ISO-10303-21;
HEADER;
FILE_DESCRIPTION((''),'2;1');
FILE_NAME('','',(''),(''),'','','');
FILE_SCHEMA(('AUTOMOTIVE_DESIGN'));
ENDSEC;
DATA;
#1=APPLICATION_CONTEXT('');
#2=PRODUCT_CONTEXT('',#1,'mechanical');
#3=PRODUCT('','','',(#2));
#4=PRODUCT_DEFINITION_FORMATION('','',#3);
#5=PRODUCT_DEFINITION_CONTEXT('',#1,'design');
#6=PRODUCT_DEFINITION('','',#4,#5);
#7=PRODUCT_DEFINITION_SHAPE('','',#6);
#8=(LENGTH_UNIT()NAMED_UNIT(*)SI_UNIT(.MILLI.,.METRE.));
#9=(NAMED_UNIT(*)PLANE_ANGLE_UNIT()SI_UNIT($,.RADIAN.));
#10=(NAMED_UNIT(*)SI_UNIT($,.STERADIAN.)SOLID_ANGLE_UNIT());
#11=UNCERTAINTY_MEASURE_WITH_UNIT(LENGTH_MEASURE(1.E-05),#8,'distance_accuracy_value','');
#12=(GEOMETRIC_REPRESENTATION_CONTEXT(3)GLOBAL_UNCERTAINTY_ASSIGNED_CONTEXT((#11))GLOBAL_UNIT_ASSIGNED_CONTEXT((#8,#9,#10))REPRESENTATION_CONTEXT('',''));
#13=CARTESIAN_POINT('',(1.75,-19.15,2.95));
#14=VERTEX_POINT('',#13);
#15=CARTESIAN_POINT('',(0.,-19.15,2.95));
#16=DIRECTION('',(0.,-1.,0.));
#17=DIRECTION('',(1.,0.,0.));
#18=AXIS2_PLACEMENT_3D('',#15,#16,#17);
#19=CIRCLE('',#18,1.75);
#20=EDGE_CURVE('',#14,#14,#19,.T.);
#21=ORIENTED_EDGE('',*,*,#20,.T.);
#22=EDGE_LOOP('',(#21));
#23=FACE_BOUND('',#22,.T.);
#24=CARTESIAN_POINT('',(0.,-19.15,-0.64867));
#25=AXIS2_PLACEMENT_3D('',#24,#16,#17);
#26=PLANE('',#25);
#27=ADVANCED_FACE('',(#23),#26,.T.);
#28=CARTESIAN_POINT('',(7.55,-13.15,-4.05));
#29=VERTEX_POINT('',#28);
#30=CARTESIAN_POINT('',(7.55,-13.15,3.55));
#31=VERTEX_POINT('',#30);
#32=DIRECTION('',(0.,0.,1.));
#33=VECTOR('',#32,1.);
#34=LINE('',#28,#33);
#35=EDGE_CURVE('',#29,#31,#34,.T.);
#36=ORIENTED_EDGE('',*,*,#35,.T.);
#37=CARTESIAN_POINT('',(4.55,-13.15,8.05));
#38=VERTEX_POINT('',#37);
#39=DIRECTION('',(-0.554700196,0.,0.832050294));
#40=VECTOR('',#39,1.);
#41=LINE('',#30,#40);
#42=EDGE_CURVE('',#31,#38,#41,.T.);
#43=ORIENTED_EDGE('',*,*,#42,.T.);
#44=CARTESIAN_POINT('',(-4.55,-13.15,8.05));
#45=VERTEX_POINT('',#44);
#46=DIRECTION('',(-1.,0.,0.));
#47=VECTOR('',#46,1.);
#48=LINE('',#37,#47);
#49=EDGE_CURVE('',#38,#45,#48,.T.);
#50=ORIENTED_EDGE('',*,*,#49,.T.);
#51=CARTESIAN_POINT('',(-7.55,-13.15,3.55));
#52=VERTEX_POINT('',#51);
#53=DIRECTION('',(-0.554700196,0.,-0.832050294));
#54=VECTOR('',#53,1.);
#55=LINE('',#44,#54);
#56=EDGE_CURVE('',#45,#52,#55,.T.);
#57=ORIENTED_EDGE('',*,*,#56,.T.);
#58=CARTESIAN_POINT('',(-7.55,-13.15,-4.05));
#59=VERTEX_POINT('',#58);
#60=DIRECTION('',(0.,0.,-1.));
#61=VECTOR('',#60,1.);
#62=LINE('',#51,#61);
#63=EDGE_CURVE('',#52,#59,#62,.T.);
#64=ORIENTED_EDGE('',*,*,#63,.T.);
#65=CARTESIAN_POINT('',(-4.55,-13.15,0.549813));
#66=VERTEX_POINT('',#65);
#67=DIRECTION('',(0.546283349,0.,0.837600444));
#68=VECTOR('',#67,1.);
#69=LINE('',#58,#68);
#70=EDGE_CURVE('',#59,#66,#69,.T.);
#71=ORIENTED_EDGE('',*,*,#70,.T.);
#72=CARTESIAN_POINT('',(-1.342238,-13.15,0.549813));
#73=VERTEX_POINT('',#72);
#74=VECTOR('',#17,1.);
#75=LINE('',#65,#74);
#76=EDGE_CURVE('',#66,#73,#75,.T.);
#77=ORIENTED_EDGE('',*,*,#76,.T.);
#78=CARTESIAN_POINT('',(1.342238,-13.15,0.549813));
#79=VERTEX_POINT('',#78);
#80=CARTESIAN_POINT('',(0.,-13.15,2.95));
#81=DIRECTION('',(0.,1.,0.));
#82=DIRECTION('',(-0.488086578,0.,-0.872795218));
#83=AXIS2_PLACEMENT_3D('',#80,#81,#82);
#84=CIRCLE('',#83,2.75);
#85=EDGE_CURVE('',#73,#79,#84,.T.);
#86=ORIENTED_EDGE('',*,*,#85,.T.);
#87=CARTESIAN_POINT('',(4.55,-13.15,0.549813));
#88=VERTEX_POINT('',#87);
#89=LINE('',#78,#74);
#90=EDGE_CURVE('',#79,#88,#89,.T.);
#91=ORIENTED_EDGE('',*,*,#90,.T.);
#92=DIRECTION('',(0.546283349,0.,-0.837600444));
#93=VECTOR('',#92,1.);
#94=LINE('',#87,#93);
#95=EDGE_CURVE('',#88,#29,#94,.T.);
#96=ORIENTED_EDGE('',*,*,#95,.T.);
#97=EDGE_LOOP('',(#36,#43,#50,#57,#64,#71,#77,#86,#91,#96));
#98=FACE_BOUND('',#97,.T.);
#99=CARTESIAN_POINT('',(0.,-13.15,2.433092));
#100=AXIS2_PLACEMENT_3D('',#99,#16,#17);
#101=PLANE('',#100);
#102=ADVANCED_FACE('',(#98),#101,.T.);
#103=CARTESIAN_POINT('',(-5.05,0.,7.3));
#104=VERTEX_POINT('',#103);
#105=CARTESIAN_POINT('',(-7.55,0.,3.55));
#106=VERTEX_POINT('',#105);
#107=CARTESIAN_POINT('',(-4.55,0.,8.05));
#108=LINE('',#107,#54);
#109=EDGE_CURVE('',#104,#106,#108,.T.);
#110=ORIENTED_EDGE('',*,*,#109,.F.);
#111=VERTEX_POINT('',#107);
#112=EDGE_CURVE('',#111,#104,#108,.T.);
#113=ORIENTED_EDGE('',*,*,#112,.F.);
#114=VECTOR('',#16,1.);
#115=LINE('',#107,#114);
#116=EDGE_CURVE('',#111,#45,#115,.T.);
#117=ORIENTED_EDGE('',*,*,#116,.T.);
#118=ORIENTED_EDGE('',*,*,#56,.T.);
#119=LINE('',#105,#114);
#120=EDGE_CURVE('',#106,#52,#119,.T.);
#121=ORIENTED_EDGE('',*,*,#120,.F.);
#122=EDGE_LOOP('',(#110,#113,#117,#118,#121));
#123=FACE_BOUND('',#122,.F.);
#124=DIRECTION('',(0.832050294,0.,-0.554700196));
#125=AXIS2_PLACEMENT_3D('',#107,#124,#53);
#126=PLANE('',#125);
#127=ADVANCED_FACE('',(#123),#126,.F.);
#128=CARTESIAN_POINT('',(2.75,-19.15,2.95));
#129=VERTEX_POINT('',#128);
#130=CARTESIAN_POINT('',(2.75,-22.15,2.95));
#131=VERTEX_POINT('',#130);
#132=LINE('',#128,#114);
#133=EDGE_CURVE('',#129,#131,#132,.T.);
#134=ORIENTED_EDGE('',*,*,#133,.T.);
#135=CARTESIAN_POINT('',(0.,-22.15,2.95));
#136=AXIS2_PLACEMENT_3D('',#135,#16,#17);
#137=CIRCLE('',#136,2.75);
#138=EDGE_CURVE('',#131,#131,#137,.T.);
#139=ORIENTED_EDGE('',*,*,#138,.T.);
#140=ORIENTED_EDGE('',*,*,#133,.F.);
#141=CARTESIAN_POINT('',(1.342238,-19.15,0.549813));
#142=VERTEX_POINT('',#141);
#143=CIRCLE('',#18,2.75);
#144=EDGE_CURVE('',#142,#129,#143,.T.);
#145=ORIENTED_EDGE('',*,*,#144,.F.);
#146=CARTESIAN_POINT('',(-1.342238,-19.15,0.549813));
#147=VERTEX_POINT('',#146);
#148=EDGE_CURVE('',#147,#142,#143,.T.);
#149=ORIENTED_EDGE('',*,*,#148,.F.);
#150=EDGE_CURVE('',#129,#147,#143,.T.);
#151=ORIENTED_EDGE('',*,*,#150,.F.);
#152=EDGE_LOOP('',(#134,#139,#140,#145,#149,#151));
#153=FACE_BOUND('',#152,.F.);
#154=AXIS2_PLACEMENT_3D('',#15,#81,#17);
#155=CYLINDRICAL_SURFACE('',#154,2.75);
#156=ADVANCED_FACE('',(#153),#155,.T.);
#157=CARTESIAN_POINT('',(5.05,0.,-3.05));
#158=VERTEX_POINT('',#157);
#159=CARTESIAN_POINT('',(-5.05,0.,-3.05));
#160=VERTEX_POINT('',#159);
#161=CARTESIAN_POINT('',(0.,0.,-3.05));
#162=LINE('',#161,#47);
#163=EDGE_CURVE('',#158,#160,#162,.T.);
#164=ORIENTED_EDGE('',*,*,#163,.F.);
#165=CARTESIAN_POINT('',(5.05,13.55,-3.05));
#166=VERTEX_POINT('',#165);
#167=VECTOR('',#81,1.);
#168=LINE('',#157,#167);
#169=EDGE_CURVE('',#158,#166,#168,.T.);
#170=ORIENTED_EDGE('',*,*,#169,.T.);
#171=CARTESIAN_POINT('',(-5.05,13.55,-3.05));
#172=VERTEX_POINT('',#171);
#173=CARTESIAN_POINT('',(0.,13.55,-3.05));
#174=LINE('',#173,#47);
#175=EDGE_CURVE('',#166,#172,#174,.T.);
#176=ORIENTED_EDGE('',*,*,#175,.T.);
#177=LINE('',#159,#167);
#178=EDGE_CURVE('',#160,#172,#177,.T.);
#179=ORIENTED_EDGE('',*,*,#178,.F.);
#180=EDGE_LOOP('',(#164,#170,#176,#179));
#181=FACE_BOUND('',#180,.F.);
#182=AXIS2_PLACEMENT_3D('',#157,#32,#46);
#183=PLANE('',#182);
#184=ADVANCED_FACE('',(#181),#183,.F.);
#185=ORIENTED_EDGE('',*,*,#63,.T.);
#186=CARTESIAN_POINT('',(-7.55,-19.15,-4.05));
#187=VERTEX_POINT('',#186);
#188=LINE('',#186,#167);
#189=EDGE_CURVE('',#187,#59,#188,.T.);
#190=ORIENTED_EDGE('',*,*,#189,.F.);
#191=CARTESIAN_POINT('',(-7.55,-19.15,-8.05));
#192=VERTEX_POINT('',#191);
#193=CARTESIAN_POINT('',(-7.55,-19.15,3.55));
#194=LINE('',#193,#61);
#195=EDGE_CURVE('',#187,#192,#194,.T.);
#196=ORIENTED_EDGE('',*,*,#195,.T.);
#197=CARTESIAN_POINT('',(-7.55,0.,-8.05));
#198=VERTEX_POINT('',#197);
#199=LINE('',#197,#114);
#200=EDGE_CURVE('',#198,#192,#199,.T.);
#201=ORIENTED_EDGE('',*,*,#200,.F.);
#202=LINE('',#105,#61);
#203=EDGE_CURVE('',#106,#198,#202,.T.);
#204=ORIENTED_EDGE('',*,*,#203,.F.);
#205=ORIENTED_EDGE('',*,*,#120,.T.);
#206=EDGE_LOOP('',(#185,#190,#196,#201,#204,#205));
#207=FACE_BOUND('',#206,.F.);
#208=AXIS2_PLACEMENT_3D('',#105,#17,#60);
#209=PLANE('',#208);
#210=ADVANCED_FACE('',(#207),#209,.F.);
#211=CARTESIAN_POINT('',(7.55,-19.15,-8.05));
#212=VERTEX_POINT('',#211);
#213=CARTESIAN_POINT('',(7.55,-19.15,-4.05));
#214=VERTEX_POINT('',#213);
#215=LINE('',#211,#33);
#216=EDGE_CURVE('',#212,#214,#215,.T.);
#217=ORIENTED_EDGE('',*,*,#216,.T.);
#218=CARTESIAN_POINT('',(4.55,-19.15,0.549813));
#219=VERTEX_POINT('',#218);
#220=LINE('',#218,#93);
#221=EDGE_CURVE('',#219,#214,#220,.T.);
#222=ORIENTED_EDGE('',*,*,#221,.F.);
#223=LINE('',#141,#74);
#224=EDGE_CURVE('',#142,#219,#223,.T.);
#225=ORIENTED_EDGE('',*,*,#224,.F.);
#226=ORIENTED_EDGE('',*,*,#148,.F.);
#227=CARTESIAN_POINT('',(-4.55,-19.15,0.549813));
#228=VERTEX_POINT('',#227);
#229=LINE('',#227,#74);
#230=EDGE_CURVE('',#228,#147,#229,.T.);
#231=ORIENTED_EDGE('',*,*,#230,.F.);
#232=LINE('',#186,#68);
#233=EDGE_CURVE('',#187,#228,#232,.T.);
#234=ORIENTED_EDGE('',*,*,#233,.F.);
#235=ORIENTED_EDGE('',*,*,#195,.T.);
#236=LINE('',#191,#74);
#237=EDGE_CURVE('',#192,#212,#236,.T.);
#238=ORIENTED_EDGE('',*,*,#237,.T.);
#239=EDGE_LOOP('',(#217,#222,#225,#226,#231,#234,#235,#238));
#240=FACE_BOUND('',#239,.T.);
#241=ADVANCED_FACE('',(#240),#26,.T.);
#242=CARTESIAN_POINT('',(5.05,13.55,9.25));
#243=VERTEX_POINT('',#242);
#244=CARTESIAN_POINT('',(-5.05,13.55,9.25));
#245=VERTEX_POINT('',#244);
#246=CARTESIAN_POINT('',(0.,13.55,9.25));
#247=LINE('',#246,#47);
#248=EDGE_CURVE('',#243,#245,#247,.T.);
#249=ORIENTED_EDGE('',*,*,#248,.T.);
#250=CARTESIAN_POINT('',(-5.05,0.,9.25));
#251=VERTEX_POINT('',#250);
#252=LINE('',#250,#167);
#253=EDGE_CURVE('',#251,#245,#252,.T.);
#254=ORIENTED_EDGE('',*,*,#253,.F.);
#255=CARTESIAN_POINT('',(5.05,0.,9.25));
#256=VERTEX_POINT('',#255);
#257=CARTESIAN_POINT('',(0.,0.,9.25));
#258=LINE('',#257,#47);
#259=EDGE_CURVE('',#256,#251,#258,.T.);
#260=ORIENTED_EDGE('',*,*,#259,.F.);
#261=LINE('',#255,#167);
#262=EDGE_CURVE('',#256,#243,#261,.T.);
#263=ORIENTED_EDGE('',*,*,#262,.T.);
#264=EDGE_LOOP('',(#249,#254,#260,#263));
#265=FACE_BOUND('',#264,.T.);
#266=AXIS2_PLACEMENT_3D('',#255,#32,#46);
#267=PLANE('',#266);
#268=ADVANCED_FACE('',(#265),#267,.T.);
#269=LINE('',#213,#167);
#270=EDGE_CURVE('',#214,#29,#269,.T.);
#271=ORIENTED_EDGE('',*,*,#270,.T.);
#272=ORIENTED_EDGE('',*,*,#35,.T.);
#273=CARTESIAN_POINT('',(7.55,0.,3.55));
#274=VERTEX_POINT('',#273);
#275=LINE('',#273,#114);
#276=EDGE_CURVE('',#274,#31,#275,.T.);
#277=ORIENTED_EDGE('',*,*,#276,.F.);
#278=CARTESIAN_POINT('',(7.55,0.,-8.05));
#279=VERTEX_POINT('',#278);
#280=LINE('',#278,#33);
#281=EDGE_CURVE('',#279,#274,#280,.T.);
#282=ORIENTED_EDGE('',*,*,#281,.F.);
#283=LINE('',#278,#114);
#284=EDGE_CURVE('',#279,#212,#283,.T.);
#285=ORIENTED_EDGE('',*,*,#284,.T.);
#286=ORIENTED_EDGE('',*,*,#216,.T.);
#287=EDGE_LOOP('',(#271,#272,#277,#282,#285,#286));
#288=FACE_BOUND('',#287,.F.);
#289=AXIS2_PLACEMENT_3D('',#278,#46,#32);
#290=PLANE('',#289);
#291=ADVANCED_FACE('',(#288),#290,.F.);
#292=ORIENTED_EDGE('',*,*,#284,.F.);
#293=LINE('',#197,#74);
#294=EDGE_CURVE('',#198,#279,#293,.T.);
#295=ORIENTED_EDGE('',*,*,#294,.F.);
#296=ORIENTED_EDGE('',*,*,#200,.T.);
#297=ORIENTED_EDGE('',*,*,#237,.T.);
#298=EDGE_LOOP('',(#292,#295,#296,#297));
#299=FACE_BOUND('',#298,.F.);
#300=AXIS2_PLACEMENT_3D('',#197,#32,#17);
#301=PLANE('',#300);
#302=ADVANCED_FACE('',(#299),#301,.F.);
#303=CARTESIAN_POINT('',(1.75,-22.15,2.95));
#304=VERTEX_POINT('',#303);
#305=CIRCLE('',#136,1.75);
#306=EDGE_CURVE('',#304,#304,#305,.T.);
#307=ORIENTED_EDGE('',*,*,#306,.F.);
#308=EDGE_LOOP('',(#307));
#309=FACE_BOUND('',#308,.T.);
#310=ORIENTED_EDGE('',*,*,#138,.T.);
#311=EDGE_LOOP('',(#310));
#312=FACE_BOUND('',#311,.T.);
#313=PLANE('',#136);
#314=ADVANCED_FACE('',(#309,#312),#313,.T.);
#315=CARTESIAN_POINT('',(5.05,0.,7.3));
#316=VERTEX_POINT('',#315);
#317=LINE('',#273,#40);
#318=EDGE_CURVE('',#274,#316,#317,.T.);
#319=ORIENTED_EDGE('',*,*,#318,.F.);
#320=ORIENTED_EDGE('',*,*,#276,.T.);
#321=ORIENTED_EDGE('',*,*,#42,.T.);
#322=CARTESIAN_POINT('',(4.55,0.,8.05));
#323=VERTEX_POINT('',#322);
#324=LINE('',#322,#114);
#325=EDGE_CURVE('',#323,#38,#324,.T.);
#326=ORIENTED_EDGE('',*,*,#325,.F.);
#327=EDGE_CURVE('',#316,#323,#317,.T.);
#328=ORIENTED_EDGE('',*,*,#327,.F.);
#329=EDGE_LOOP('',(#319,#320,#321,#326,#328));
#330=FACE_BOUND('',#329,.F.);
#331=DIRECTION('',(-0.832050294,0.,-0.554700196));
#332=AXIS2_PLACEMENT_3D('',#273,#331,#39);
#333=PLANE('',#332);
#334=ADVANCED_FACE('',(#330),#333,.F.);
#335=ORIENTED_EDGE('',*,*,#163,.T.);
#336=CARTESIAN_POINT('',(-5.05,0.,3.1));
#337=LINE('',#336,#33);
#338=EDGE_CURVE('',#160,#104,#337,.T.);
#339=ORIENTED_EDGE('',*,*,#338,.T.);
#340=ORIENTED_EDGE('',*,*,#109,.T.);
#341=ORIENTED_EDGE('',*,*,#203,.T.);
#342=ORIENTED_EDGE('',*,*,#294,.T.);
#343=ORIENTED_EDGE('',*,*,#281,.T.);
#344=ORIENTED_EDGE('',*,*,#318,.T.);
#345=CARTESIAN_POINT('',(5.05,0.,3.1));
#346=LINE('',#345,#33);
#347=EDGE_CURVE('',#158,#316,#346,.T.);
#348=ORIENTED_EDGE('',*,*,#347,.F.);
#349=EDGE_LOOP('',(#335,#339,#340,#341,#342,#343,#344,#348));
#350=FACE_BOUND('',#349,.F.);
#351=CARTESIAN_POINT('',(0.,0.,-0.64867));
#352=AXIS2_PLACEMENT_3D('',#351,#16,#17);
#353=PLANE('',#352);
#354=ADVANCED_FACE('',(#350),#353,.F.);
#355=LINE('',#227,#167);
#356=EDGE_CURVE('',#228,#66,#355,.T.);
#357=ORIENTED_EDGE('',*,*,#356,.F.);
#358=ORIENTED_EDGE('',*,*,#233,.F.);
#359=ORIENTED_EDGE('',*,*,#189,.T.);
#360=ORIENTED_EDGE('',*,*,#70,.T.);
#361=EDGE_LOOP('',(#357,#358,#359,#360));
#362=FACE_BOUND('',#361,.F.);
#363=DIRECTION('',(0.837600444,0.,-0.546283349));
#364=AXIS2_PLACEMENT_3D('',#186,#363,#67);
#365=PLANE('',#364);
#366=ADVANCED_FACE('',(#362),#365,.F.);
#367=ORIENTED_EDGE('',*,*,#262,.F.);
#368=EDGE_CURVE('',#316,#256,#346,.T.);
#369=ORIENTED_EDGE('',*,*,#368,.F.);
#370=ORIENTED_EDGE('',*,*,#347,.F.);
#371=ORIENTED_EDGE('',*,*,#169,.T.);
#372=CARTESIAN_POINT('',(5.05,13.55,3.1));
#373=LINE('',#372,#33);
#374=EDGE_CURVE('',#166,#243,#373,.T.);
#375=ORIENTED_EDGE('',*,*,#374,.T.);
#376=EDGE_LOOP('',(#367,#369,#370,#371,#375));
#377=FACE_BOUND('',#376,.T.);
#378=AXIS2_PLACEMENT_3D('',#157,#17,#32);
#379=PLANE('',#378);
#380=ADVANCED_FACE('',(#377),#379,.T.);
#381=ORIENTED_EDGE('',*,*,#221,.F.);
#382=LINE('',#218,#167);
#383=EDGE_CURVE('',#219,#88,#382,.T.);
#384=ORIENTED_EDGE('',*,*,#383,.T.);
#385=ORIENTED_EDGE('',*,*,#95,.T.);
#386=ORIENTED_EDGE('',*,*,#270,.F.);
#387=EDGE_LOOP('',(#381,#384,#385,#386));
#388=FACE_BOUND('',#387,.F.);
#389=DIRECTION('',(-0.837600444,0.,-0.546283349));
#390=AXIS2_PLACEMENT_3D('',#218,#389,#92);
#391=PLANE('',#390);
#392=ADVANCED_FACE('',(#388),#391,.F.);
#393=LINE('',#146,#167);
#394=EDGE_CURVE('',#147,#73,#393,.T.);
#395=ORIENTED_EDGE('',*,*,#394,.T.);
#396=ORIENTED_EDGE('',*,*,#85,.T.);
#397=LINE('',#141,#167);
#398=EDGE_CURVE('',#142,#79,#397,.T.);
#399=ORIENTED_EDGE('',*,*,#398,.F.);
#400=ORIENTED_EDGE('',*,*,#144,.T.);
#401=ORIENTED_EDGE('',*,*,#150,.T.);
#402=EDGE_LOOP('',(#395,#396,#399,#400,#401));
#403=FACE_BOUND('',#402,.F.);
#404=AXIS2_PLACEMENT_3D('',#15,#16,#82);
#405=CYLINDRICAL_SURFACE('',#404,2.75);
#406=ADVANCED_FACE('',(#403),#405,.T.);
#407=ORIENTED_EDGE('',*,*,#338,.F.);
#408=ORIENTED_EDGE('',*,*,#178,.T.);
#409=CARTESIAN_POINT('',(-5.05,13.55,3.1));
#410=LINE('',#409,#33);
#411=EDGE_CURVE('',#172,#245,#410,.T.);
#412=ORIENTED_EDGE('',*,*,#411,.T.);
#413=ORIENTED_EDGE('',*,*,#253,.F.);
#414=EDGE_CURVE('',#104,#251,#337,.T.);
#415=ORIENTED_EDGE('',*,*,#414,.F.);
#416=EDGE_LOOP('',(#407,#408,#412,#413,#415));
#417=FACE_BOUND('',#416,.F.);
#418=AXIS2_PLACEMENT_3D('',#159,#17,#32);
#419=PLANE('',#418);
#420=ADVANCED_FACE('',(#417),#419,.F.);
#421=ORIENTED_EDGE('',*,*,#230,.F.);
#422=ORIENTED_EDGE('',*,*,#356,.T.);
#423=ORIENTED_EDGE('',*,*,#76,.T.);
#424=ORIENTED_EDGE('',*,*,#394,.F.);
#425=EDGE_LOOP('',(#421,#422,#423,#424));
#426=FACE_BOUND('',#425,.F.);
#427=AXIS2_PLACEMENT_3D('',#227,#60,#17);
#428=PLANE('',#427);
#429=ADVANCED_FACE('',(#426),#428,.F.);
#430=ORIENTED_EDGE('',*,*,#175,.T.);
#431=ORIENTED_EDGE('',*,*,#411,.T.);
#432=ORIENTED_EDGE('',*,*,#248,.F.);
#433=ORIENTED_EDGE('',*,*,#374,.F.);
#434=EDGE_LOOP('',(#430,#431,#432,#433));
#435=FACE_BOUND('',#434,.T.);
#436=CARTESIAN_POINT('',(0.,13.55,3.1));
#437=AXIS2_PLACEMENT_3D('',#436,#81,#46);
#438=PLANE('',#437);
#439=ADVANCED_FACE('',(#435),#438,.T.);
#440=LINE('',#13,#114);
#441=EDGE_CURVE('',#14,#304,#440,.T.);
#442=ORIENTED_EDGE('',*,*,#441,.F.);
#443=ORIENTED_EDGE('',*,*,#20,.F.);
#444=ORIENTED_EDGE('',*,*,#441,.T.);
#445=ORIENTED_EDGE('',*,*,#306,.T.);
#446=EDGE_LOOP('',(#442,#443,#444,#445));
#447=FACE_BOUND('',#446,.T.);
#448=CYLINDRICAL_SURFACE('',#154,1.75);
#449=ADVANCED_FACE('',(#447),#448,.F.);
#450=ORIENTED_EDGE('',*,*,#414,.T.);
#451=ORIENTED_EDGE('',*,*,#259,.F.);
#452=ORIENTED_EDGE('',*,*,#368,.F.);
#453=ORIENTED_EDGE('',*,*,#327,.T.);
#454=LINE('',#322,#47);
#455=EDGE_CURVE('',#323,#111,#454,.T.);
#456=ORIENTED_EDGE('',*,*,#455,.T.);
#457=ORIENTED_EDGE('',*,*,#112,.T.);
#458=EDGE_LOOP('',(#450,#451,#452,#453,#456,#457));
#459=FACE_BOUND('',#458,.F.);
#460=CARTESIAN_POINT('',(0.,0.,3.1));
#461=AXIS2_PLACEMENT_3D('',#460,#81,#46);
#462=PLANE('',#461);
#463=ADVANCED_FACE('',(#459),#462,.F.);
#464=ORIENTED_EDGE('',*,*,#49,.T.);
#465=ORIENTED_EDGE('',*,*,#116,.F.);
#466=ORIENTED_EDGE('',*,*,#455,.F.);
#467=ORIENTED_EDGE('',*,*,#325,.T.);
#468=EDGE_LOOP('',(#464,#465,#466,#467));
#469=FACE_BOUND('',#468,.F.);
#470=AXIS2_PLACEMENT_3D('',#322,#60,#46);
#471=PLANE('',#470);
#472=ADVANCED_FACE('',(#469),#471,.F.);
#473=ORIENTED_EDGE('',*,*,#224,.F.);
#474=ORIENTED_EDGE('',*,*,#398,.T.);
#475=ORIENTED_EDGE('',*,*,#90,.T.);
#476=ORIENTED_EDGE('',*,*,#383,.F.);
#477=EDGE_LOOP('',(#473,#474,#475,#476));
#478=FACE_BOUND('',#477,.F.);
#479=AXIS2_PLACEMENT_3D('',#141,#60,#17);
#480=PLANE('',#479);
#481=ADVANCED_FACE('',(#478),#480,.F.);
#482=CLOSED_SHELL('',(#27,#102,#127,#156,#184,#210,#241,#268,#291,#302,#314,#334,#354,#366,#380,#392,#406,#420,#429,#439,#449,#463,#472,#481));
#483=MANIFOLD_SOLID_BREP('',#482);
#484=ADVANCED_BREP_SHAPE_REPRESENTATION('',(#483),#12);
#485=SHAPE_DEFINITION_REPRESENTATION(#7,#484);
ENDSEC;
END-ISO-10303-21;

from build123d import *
from build123d import SkipClean  # not in build123d's __all__

# Parameters (mm, degrees)
F1_DEPTH = 19.15
F2_R     = 2.75
F2_R_2   = 1.75
F3_DEPTH = 3
F5_DEPTH = 6
F6_W     = 10.1
F6_H     = 12.3
F7_DEPTH = 13.55


# Not quite as in the source:
# - after a boolean that leaves OpenCascade's solid faulty, fix() repairs it


with BuildPart() as f1:
    # F0 (on Front) → F1 (new body)
    with BuildSketch(Plane.XZ):
        Polygon((4.55, 8.05), (-4.55, 8.05), (-7.55, 3.55), (-7.55, -8.05), (7.55, -8.05), (7.55, 3.55), align=None)
    extrude(amount=F1_DEPTH)

    # F2 (on face) → F3 (join)
    with BuildSketch(Plane.XZ.offset(19.15)):
        with Locations((0, 2.95)):
            Circle(F2_R)
        with Locations((0, 2.95)):
            Circle(F2_R_2, mode=Mode.SUBTRACT)
    extrude(amount=F3_DEPTH)

    # F4 (on face) → F5 (cut)
    with BuildSketch(Plane.XZ.offset(19.15)):
        with BuildLine():
            Line((-7.55, -4.05), (-4.55, 0.5498131504))
            Line((-4.55, 0.5498131504), (-1.3422380888, 0.5498131504))
            ThreePointArc((-1.3422380888, 0.5498131504), (0, 5.7), (1.3422380888, 0.5498131504))
            Line((1.3422380888, 0.5498131504), (4.55, 0.5498131504))
            Line((4.55, 0.5498131504), (7.55, -4.05))
            Line((7.55, -4.05), (7.55, 3.55))
            Line((7.55, 3.55), (4.55, 8.05))
            Line((4.55, 8.05), (-4.55, 8.05))
            Line((-4.55, 8.05), (-7.55, 3.55))
            Line((-7.55, 3.55), (-7.55, -4.05))
        make_face()
    with SkipClean():  # cleaning this boolean's faces spoils the solid; the shape is the same uncleaned
        extrude(amount=-F5_DEPTH, mode=Mode.SUBTRACT)

    # F6 (on face) → F7 (join)
    with BuildSketch(Plane(origin=(0, 0, 0), x_dir=(-1, 0, 0), z_dir=(0, 1, 0))):
        with Locations((0, 3.1)):
            Rectangle(F6_W, F6_H)
    extrude(amount=F7_DEPTH)

    add(f1.part.fix(), mode=Mode.REPLACE)


solid = f1.part
